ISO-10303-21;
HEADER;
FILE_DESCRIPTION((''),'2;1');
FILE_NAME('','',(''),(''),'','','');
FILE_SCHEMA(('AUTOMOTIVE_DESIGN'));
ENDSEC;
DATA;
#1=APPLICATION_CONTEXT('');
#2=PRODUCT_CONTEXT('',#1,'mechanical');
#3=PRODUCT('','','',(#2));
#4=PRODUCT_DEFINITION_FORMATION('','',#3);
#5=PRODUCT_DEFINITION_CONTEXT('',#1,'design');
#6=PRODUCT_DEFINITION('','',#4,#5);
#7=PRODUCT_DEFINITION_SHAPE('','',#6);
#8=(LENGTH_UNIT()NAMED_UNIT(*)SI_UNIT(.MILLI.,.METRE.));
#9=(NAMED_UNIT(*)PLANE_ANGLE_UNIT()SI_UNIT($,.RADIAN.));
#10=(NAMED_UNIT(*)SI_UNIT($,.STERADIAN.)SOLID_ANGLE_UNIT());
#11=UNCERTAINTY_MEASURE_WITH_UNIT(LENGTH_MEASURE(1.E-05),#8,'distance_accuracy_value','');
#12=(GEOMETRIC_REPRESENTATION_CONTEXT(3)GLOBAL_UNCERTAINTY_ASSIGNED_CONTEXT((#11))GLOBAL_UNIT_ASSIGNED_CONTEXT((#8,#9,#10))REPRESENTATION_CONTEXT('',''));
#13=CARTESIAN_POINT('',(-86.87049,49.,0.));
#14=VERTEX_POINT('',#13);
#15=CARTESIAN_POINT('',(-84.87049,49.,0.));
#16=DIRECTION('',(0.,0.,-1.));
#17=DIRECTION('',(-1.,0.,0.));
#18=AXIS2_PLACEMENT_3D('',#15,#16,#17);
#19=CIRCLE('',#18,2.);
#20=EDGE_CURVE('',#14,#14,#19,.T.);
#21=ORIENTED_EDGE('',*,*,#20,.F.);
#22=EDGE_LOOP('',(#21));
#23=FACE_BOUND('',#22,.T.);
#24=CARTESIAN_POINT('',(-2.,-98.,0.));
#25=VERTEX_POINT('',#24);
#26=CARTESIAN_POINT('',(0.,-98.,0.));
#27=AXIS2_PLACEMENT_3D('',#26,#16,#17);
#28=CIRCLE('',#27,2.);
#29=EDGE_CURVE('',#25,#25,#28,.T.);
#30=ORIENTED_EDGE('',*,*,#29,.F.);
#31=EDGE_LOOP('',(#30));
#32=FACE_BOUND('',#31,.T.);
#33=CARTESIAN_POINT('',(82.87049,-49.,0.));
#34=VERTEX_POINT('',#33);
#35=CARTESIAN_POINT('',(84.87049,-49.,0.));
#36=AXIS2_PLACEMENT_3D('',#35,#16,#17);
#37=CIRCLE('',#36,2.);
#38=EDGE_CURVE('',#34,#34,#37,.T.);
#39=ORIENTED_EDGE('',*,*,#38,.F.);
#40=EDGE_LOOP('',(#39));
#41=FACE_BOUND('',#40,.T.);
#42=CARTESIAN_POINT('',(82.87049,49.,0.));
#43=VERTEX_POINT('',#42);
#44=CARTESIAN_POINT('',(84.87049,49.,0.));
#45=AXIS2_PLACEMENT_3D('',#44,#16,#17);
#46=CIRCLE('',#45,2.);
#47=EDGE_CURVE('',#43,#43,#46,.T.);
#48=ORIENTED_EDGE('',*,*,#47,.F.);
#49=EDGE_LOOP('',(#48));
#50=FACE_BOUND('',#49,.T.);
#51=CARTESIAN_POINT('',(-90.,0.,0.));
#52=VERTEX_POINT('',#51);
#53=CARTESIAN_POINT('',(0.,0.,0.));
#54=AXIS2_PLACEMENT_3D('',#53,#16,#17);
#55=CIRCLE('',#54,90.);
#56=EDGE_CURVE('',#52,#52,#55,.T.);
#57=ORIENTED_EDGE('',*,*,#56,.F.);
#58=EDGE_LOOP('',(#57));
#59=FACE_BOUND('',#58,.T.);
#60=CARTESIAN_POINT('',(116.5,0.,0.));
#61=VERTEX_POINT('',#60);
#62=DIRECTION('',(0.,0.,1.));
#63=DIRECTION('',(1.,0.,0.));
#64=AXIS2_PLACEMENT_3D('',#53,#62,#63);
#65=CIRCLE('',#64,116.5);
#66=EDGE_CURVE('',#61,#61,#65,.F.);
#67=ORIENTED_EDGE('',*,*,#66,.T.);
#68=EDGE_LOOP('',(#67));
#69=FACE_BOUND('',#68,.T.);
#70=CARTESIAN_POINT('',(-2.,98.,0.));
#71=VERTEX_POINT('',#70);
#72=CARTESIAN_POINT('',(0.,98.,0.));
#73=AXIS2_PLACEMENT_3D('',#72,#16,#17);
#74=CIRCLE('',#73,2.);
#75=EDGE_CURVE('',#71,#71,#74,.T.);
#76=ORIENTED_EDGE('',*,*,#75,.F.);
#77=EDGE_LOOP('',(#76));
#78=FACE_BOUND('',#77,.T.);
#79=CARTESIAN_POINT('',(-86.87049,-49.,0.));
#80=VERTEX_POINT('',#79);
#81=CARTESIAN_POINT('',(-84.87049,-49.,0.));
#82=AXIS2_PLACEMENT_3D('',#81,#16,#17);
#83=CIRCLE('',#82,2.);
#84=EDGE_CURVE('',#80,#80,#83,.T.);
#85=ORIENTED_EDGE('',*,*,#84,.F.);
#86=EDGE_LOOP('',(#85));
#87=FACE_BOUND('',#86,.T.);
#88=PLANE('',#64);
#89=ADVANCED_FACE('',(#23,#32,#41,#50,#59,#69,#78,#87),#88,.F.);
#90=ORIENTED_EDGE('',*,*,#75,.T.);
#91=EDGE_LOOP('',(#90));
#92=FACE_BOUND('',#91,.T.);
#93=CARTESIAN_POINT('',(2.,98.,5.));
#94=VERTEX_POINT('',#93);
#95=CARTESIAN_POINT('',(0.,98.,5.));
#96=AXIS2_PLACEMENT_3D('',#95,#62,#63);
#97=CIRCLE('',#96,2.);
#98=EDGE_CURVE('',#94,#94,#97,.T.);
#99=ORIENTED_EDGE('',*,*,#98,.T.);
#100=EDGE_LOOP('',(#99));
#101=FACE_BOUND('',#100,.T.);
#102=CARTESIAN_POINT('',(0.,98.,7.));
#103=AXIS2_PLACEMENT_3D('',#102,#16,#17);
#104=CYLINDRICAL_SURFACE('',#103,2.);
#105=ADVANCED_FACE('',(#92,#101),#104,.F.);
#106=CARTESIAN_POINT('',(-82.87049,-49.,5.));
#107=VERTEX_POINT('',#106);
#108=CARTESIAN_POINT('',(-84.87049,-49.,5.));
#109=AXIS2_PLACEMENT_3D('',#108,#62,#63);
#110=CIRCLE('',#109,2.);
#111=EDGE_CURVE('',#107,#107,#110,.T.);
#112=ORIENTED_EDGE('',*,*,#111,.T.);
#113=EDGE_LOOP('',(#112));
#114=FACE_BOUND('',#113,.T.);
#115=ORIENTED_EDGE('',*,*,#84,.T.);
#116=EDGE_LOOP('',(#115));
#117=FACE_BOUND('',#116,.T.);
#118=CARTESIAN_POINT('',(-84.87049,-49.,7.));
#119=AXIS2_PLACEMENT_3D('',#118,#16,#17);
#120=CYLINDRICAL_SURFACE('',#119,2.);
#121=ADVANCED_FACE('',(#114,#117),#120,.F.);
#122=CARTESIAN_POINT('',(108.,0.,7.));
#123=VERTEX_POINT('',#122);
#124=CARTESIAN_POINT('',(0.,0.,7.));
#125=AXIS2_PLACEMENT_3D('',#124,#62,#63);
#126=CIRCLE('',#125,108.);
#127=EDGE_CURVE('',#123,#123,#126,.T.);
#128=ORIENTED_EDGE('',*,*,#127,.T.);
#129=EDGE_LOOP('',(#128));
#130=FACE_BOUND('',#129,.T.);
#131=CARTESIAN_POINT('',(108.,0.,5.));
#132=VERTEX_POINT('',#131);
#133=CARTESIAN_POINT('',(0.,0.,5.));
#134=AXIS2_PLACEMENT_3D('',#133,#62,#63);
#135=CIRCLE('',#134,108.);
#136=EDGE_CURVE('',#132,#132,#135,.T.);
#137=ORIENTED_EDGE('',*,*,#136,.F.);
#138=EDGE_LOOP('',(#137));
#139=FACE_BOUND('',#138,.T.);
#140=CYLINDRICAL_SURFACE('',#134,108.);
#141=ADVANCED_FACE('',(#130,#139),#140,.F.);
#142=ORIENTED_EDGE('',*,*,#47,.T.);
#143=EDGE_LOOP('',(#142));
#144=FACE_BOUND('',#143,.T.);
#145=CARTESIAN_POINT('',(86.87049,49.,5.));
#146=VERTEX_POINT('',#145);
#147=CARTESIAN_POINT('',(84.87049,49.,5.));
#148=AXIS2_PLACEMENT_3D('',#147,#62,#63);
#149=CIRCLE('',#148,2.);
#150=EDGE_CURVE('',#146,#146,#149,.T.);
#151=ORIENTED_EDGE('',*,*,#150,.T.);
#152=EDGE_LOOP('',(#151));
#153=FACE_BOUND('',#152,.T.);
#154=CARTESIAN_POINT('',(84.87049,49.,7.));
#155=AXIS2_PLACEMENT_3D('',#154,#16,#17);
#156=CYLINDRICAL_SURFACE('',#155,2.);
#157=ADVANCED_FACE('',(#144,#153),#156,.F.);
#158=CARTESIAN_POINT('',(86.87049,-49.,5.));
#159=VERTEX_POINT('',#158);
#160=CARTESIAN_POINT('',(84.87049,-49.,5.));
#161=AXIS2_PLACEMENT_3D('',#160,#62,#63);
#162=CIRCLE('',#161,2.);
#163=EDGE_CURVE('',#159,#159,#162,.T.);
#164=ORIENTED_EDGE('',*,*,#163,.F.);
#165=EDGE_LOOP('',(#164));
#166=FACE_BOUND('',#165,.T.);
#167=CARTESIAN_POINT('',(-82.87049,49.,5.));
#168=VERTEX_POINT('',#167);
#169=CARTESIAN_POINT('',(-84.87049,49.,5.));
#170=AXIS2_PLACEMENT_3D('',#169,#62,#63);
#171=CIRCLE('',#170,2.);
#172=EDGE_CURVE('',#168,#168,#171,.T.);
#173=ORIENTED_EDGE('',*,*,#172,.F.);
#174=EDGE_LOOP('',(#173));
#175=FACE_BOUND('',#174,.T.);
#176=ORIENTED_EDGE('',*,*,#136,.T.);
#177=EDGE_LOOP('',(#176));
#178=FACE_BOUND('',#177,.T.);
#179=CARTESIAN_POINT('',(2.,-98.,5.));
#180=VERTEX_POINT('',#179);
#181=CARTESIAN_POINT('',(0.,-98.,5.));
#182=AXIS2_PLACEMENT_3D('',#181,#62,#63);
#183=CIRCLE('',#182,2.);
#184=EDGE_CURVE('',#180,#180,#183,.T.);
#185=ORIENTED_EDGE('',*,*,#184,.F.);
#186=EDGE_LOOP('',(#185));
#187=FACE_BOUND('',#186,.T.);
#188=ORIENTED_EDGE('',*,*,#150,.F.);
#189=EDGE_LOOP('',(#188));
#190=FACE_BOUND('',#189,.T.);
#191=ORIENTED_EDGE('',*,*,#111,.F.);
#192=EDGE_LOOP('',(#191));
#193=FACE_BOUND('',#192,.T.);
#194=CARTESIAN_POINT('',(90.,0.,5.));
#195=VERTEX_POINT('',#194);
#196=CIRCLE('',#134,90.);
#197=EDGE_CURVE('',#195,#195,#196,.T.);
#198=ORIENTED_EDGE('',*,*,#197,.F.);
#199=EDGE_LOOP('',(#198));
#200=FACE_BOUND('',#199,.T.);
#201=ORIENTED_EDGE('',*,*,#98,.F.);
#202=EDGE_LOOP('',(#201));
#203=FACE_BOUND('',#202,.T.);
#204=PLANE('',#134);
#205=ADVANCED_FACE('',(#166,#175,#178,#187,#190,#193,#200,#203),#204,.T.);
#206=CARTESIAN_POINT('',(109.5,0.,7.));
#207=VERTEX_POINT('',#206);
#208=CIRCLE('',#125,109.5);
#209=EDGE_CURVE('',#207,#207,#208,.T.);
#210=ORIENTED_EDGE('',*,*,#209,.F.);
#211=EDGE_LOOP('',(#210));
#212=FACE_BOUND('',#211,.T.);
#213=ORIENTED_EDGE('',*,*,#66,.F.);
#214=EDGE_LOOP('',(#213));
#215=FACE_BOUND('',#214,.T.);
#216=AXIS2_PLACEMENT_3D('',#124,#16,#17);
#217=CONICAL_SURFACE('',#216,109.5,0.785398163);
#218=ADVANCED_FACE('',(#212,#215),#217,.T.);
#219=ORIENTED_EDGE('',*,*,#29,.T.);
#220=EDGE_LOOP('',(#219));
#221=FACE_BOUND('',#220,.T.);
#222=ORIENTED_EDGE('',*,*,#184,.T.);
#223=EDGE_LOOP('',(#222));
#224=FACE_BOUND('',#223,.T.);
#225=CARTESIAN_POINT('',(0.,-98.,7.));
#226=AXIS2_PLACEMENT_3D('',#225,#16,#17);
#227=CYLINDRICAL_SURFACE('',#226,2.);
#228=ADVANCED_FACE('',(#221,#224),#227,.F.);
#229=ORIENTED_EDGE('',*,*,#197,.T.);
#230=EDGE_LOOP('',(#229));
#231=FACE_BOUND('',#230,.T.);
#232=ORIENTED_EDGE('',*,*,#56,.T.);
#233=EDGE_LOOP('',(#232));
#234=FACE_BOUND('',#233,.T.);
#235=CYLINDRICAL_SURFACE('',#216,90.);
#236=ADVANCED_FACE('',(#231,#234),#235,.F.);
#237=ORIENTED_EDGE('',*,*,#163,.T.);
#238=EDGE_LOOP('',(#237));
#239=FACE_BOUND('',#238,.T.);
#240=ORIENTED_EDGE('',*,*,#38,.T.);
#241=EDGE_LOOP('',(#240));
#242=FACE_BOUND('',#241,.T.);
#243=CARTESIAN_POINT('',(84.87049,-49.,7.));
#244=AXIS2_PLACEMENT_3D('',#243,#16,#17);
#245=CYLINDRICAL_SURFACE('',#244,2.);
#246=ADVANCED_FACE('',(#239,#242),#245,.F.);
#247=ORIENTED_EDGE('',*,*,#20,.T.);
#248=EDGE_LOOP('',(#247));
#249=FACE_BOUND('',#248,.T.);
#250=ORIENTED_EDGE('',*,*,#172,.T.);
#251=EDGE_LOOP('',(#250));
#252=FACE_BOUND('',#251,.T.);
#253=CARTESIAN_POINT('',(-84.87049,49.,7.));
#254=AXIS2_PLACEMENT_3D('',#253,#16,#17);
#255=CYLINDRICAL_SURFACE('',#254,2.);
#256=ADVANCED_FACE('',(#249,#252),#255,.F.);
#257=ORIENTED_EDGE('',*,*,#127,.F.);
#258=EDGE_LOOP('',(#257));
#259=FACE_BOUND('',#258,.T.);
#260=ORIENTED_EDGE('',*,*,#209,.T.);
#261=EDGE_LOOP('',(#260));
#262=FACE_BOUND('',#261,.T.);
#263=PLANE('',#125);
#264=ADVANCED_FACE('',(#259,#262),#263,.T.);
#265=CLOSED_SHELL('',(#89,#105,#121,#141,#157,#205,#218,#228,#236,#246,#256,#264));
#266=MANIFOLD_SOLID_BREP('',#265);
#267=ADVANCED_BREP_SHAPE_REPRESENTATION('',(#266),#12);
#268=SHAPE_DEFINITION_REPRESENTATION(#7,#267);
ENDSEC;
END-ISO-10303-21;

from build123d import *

# Parameters (mm, degrees)
SKETCH1_R           = 119.5
BOSS_EXTRUDE1_DEPTH = 7
CHAMFER2_SIZE       = 10
SKETCH3_R           = 108
CUT_EXTRUDE1_DEPTH  = 2
SKETCH4_R           = 90
SKETCH4_R_2         = 2
CUT_EXTRUDE2_DEPTH  = 165.904517828


with BuildPart() as part:
    # Sketch1 → Boss-Extrude1 (new body)
    with BuildSketch(Plane.XY):
        Circle(SKETCH1_R)
    extrude(amount=BOSS_EXTRUDE1_DEPTH)

    # Chamfer2
    # the kernel refuses this chamfer: 10 mm, written as the material it takes off along each edge
    with BuildSketch(Plane(origin=(0, 0, 7), x_dir=(1, 0, 0), z_dir=(0, -1, 0))) as chamfer2_piece_1:
        Polygon((119.5, -CHAMFER2_SIZE), (119.5 - CHAMFER2_SIZE, 0), (119.5, 0), align=None)
    revolve(axis=Axis((0, 0, 7), (0, 0, 1)), mode=Mode.SUBTRACT)

    # Sketch3 → Cut-Extrude1 (cut)
    with BuildSketch(Plane.XY.offset(7)):
        Circle(SKETCH3_R)
    extrude(amount=-CUT_EXTRUDE1_DEPTH, mode=Mode.SUBTRACT)

    # Sketch4 → Cut-Extrude2 (cut, through all)
    with BuildSketch(Plane(origin=(0, 0, 0), x_dir=(-1, 0, 0), z_dir=(0, 0, -1))):
        Circle(SKETCH4_R)
        with Locations((0, 98)):
            Circle(SKETCH4_R_2)
        with Locations((84.870489571, 49)):
            Circle(SKETCH4_R_2)
        with Locations((84.870489571, -49)):
            Circle(SKETCH4_R_2)
        with Locations((0, -98)):
            Circle(SKETCH4_R_2)
        with Locations((-84.870489571, -49)):
            Circle(SKETCH4_R_2)
        with Locations((-84.870489571, 49)):
            Circle(SKETCH4_R_2)
    extrude(amount=-CUT_EXTRUDE2_DEPTH, mode=Mode.SUBTRACT)


solid = part.part
